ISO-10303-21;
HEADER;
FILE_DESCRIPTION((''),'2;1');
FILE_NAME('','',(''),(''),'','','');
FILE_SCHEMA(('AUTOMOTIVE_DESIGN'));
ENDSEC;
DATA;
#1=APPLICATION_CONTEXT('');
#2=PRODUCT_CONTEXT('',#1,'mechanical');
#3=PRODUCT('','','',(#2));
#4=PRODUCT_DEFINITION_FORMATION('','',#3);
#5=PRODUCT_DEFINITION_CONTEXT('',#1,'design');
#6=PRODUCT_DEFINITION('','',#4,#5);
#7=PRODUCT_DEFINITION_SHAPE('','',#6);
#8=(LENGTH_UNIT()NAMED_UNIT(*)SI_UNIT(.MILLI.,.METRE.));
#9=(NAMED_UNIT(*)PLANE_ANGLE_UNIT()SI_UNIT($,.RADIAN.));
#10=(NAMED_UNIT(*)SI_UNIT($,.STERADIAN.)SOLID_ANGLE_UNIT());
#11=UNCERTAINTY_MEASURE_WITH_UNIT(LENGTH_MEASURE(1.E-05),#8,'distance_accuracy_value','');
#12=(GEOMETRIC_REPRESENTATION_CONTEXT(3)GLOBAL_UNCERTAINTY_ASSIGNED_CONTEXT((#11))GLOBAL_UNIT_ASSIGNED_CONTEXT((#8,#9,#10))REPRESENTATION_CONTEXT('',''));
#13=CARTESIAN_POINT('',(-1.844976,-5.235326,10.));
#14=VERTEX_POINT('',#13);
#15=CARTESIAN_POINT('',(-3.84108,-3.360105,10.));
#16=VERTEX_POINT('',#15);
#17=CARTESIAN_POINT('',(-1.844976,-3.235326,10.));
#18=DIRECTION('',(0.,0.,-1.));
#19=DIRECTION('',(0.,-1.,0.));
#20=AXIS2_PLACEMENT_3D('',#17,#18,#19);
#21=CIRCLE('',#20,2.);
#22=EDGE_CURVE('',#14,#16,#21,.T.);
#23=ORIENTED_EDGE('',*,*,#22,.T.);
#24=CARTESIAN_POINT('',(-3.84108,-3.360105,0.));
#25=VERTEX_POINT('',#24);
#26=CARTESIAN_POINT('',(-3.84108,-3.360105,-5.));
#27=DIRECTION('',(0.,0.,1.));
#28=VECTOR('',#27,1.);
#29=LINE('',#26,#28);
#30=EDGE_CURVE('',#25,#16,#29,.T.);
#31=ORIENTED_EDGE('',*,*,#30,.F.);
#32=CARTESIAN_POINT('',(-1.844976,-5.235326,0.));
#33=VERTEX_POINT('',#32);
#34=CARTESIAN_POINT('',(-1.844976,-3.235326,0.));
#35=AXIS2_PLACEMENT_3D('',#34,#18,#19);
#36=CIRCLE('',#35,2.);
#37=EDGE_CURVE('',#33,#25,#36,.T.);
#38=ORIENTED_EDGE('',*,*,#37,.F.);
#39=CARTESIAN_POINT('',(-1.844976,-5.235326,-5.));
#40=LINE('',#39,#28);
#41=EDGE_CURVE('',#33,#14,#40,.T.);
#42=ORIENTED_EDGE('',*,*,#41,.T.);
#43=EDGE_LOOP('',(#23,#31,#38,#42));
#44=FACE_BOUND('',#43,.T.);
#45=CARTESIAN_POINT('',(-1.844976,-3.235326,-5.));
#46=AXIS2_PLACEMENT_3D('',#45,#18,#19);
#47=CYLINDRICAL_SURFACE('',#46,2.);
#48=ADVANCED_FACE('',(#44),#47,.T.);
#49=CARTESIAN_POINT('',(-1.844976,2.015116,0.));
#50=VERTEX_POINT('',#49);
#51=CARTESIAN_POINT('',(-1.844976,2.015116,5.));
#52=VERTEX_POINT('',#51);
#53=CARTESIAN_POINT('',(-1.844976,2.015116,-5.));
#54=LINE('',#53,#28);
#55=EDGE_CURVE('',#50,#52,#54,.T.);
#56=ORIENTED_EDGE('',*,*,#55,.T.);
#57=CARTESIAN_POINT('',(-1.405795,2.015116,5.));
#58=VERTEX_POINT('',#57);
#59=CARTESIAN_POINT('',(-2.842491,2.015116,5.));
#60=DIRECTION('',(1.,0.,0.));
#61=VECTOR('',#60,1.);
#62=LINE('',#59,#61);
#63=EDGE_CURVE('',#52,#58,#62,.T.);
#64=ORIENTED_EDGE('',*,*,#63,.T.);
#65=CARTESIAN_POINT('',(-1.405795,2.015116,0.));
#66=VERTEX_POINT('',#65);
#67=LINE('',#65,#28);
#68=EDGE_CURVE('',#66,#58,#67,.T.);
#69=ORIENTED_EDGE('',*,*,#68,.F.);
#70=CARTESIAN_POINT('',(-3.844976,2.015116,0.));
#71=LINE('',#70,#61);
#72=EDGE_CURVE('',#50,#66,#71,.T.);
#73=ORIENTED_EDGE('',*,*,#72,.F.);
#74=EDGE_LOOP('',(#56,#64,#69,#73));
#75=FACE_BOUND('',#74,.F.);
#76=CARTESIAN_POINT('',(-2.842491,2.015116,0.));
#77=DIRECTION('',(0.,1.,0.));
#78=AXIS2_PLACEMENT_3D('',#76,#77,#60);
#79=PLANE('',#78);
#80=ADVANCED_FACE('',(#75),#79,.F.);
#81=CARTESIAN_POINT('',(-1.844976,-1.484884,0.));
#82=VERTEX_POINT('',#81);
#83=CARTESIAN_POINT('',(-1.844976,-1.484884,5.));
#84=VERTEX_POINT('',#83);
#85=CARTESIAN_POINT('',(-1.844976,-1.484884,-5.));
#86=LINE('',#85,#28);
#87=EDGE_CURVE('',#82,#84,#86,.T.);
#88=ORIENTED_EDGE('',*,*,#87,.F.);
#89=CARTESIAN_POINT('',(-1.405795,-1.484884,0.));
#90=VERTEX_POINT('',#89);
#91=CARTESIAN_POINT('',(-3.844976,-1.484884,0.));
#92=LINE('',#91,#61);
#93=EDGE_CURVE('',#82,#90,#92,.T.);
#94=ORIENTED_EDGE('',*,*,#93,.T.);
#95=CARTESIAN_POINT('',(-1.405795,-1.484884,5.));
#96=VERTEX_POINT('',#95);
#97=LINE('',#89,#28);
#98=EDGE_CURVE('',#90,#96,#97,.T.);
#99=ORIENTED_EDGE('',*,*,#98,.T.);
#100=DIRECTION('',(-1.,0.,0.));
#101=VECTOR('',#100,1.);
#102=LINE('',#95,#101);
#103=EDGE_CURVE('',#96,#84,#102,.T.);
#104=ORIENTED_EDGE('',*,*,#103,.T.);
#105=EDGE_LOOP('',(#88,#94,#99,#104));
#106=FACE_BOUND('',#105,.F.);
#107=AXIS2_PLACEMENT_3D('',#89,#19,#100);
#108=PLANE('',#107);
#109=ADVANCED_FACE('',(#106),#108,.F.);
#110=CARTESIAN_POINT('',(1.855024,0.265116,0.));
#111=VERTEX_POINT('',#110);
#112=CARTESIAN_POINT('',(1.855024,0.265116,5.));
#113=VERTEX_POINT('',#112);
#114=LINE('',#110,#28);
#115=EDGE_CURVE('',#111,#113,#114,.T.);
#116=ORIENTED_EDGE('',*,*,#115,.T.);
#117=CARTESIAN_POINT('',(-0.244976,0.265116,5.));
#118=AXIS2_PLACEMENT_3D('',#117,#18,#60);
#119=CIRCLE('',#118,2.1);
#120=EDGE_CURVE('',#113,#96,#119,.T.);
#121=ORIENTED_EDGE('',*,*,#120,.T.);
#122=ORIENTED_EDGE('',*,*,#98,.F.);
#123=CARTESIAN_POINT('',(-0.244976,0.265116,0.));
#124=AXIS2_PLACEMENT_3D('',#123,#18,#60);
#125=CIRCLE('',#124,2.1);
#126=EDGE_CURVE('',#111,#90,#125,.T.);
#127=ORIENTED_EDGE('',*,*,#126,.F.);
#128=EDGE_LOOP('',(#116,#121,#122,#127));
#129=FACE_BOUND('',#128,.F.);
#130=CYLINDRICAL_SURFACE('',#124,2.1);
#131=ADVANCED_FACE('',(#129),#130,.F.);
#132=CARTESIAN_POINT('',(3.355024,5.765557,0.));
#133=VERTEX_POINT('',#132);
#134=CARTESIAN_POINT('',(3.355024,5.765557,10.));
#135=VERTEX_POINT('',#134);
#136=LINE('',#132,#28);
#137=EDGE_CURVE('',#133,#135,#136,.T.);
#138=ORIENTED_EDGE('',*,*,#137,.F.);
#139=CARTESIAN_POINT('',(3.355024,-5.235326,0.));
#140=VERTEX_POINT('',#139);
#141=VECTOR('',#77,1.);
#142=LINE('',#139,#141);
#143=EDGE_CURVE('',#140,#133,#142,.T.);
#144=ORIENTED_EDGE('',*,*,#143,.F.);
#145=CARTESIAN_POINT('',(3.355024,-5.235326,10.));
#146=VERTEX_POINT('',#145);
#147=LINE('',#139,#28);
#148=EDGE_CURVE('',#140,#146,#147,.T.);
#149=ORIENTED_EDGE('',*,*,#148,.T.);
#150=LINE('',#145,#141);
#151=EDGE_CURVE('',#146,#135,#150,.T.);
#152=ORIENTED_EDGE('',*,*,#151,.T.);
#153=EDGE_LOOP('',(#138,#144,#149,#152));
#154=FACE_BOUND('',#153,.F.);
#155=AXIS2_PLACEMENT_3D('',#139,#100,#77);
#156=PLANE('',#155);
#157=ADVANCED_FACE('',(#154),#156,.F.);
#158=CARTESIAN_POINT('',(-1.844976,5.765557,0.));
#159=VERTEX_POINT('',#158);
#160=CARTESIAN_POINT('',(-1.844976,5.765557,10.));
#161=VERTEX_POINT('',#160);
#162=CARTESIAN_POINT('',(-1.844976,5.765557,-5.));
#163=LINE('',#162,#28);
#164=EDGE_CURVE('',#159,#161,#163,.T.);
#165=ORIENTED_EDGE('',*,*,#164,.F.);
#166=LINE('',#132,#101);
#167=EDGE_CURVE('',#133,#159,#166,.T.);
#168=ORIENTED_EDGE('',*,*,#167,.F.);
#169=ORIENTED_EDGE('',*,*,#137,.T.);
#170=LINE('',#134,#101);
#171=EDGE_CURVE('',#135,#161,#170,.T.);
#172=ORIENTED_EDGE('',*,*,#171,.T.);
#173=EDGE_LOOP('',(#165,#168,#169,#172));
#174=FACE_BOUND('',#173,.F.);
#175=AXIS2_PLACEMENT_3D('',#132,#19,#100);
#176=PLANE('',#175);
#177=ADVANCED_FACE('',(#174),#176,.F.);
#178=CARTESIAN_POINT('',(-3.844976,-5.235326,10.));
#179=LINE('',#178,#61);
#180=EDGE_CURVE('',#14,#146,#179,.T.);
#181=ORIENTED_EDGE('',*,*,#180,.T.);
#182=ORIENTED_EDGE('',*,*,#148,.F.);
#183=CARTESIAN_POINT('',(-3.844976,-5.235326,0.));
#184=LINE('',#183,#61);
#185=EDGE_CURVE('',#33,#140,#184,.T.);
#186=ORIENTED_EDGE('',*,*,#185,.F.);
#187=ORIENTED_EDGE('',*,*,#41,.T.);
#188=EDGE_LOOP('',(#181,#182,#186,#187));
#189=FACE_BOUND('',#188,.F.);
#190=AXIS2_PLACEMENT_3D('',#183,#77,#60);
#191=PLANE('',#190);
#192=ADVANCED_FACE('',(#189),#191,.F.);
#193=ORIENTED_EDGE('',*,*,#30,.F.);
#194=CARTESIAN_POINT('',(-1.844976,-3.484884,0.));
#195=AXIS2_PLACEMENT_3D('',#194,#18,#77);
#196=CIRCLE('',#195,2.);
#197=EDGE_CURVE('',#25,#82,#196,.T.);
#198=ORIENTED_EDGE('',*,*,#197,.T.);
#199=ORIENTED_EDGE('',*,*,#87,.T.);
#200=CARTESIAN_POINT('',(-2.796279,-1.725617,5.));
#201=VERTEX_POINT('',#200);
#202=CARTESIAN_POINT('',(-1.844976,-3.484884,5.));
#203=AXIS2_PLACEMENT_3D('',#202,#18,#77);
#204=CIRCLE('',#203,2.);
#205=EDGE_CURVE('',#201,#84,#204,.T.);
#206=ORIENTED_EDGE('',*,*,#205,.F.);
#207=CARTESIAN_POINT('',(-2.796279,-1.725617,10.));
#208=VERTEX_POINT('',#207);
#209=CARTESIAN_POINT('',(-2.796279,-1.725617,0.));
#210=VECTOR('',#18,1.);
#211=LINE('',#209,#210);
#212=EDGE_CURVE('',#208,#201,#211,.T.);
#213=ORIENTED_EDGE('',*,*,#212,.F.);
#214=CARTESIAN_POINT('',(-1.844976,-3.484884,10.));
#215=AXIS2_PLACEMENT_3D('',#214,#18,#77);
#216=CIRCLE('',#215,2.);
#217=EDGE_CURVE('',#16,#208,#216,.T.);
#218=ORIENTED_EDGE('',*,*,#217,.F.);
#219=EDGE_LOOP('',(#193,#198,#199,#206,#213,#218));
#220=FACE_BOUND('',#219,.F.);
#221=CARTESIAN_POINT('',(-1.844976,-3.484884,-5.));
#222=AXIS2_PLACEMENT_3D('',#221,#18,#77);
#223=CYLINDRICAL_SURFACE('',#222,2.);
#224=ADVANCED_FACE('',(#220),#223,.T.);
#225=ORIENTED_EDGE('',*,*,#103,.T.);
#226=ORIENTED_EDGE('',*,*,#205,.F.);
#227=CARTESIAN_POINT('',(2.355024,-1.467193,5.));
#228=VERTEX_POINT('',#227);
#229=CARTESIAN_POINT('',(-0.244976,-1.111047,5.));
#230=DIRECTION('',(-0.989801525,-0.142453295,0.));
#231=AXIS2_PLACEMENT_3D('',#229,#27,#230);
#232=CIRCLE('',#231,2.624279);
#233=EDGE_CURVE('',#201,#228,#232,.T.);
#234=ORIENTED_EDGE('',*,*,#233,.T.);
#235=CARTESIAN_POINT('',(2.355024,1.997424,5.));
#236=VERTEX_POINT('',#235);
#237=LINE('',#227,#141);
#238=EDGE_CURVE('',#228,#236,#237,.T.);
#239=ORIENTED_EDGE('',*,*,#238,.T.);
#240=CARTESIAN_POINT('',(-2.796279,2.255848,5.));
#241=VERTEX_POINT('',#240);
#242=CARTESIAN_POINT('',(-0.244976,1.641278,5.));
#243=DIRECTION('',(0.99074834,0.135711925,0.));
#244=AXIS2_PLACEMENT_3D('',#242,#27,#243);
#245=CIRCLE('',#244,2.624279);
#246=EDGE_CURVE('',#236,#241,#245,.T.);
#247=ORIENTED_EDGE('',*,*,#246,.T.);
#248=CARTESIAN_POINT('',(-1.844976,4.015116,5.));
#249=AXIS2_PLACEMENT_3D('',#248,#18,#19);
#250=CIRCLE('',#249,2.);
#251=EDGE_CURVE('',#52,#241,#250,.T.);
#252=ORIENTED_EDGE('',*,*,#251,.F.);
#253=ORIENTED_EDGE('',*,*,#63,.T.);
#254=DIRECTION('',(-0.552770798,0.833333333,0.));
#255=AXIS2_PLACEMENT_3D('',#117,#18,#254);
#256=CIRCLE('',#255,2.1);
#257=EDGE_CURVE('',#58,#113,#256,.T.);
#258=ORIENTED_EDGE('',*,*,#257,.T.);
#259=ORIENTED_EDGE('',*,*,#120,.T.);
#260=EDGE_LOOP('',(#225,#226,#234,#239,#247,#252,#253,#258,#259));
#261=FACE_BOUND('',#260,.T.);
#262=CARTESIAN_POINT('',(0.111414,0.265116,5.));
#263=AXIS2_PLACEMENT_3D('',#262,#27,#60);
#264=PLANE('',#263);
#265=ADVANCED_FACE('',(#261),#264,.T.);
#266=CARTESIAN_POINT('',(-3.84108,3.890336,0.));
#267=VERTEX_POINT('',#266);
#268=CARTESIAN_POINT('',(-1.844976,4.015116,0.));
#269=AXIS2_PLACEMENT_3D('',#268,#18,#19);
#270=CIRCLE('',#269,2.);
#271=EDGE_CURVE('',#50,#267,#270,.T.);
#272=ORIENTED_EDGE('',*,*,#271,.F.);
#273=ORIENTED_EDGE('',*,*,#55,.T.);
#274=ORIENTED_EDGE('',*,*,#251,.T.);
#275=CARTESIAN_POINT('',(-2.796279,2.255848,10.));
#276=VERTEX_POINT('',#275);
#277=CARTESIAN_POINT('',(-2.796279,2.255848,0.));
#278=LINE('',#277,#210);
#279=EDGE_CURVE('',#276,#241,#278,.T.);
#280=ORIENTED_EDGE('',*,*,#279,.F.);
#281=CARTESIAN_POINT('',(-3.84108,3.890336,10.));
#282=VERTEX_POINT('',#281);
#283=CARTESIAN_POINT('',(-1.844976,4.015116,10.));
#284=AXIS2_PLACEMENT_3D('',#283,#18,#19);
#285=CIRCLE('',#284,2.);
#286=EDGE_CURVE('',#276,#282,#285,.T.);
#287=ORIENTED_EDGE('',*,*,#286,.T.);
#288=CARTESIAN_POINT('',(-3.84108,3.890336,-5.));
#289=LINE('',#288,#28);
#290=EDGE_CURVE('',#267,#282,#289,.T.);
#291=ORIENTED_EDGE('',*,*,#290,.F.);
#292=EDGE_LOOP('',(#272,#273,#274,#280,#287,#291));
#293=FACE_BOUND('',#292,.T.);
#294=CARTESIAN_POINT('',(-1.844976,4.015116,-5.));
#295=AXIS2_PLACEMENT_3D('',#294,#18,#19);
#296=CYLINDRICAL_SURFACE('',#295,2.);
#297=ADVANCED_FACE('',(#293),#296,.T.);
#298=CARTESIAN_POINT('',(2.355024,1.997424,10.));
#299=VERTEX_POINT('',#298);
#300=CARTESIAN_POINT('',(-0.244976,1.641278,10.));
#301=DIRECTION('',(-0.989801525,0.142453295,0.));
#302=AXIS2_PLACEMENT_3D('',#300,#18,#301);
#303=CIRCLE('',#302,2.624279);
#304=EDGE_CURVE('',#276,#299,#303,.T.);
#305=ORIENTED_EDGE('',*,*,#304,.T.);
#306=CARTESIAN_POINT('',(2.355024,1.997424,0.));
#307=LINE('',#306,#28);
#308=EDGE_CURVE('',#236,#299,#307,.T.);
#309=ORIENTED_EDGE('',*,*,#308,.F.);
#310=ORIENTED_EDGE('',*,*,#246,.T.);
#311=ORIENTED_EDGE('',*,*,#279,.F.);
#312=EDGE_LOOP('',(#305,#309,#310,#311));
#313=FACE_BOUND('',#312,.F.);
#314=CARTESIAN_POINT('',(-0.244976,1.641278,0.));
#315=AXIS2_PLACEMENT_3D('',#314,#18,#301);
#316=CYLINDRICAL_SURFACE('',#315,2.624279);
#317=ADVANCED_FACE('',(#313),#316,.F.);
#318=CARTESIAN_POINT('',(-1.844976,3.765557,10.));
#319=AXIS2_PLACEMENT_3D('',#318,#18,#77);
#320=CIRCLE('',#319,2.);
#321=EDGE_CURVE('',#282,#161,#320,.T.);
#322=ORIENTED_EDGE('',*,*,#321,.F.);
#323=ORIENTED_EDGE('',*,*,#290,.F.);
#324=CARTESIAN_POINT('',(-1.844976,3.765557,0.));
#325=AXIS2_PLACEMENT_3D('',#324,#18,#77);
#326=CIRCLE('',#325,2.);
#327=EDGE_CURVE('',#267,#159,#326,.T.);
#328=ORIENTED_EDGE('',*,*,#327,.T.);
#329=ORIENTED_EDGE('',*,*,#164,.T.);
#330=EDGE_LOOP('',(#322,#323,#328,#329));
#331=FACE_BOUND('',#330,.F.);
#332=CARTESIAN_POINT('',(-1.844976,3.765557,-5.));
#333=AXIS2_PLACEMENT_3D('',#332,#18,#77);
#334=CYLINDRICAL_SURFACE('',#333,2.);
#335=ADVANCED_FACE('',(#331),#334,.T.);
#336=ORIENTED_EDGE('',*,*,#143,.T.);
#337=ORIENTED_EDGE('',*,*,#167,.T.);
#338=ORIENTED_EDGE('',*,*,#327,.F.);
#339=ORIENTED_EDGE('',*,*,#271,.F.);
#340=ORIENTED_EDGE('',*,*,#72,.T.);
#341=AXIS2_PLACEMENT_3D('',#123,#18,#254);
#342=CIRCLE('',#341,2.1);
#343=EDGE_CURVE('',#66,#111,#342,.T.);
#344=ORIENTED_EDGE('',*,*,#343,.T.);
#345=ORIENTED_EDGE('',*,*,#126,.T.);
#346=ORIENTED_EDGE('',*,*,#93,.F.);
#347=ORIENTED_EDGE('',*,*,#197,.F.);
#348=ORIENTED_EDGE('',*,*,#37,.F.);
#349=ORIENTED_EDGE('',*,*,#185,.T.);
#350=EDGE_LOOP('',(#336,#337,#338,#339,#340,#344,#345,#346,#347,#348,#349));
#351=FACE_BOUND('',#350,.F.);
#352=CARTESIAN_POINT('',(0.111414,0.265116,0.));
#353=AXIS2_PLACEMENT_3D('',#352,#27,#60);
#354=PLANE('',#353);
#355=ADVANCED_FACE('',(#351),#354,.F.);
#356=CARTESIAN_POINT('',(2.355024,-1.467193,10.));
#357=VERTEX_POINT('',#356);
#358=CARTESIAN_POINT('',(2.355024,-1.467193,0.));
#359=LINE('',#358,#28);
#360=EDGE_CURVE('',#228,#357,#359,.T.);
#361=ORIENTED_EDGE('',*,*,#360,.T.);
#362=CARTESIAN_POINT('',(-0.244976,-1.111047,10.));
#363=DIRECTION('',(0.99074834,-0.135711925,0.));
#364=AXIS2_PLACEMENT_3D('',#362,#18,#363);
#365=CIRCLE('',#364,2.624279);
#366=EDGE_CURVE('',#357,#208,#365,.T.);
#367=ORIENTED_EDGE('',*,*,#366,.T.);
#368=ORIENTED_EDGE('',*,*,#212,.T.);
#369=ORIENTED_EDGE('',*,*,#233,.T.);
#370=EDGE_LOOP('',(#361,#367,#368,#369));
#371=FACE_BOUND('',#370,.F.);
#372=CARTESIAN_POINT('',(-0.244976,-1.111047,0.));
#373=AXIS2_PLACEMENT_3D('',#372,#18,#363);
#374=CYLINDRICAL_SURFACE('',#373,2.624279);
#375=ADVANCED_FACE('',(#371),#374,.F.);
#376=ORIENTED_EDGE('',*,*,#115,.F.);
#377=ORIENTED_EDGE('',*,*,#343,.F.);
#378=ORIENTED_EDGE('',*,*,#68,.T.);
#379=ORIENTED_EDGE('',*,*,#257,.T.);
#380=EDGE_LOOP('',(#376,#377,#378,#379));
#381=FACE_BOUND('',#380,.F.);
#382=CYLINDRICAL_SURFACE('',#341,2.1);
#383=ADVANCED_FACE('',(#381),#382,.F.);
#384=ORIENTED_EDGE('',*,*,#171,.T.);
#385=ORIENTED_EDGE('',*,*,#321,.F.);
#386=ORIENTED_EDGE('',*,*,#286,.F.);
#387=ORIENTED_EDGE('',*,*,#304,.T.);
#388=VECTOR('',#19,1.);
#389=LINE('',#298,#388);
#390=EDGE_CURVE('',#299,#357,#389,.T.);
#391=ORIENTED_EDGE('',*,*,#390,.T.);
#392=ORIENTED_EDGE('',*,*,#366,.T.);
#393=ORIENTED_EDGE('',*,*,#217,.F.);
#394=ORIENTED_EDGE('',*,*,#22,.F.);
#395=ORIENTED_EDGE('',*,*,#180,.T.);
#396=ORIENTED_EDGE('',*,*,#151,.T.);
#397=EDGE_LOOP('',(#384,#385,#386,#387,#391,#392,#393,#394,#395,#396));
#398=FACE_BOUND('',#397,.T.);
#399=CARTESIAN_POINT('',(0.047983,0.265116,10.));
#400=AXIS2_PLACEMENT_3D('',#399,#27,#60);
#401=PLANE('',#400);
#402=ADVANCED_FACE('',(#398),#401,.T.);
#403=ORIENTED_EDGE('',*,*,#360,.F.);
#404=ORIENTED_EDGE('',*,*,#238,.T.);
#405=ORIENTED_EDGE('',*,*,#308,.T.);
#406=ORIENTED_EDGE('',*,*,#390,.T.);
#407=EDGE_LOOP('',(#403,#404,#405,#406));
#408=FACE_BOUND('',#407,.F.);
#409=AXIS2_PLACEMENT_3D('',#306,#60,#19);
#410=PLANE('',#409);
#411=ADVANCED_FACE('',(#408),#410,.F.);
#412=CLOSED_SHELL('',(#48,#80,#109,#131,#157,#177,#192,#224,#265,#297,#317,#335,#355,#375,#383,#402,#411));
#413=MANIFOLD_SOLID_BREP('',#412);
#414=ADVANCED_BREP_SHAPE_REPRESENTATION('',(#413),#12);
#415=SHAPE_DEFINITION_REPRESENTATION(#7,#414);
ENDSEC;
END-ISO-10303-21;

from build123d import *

# Parameters (mm, degrees)
F1_DEPTH    = 10
F2_DEPTH    = 5
F3_T1_DEPTH = 20


# Not quite as in the source:
# - a fillet or chamfer that OpenCascade refuses, or shapes differently, is made with other operations: its cross-section is extruded or revolved along the edge and cut away or added


with BuildPart() as f1:
    # F0 (on Top) → F1 (new body)
    with BuildSketch(Plane.XY):
        with BuildLine():
            ThreePointArc((-2.8424912948, 2.0151155274), (-0.2360435678, 4.2655420814), (2.3550239983, 1.9974242942))
            Line((2.3550239983, 1.9974242942), (2.3550239983, -1.4671932394))
            ThreePointArc((2.3550239983, -1.4671932394), (-0.2360435678, -3.7353110266), (-2.8424912948, -1.4848844726))
            Line((-2.8424912948, -1.4848844726), (-3.8449760017, -1.4848844726))
            Line((-3.8449760017, -1.4848844726), (-3.8449760017, -5.2353262286))
            Line((-3.8449760017, -5.2353262286), (3.3550239983, -5.2353262286))
            Line((3.3550239983, -5.2353262286), (3.3550239983, 5.7655572834))
            Line((3.3550239983, 5.7655572834), (-3.8449760017, 5.7655572834))
            Line((-3.8449760017, 5.7655572834), (-3.8449760017, 2.0151155274))
            Line((-3.8449760017, 2.0151155274), (-2.8424912948, 2.0151155274))
        make_face()
    extrude(amount=F1_DEPTH)

    # F0 (on Top) → F2 (join)
    with BuildSketch(Plane.XY):
        with BuildLine():
            Line((2.3550239983, -1.4671932394), (2.3550239983, 1.9974242942))
            ThreePointArc((2.3550239983, 1.9974242942), (-0.2360435678, 4.2655420814), (-2.8424912948, 2.0151155274))
            Line((-2.8424912948, 2.0151155274), (-1.4057946783, 2.0151155274))
            ThreePointArc((-1.4057946783, 2.0151155274), (0.7480700142, 2.1154829532), (1.8550239983, 0.2651155274))
            ThreePointArc((1.8550239983, 0.2651155274), (0.7480700142, -1.5852518984), (-1.4057946783, -1.4848844726))
            Line((-1.4057946783, -1.4848844726), (-2.8424912948, -1.4848844726))
            ThreePointArc((-2.8424912948, -1.4848844726), (-0.2360435678, -3.7353110266), (2.3550239983, -1.4671932394))
        make_face()
    extrude(amount=F2_DEPTH)

    # F3: fillet of radius 2 on 4 edges, made by hand

    # F3_s2 → F3_t1 (cut)
    with BuildSketch(Plane.XY.offset(-5)):
        with BuildLine():
            ThreePointArc((-1.8449760017, 2.0151155274), (-3.259189564, 2.600901965), (-3.8449760017, 4.0151155274))
            Line((-3.8449760017, 4.0151155274), (-3.8449760017, 2.0151155274))
            Line((-3.8449760017, 2.0151155274), (-1.8449760017, 2.0151155274))
        make_face()
        with BuildLine():
            ThreePointArc((-1.8449760017, -1.4848844726), (-3.259189564, -2.0706709102), (-3.8449760017, -3.4848844726))
            Line((-3.8449760017, -3.4848844726), (-3.8449760017, -1.4848844726))
            Line((-3.8449760017, -1.4848844726), (-1.8449760017, -1.4848844726))
        make_face()
        with BuildLine():
            ThreePointArc((-1.8449760017, -5.2353262286), (-3.259189564, -4.6495397909), (-3.8449760017, -3.2353262286))
            Line((-3.8449760017, -3.2353262286), (-3.8449760017, -5.2353262286))
            Line((-3.8449760017, -5.2353262286), (-1.8449760017, -5.2353262286))
        make_face()
        with BuildLine():
            ThreePointArc((-1.8449760017, 5.7655572834), (-3.259189564, 5.1797708458), (-3.8449760017, 3.7655572834))
            Line((-3.8449760017, 3.7655572834), (-3.8449760017, 5.7655572834))
            Line((-3.8449760017, 5.7655572834), (-1.8449760017, 5.7655572834))
        make_face()
    extrude(amount=F3_T1_DEPTH, mode=Mode.SUBTRACT)


solid = f1.part
